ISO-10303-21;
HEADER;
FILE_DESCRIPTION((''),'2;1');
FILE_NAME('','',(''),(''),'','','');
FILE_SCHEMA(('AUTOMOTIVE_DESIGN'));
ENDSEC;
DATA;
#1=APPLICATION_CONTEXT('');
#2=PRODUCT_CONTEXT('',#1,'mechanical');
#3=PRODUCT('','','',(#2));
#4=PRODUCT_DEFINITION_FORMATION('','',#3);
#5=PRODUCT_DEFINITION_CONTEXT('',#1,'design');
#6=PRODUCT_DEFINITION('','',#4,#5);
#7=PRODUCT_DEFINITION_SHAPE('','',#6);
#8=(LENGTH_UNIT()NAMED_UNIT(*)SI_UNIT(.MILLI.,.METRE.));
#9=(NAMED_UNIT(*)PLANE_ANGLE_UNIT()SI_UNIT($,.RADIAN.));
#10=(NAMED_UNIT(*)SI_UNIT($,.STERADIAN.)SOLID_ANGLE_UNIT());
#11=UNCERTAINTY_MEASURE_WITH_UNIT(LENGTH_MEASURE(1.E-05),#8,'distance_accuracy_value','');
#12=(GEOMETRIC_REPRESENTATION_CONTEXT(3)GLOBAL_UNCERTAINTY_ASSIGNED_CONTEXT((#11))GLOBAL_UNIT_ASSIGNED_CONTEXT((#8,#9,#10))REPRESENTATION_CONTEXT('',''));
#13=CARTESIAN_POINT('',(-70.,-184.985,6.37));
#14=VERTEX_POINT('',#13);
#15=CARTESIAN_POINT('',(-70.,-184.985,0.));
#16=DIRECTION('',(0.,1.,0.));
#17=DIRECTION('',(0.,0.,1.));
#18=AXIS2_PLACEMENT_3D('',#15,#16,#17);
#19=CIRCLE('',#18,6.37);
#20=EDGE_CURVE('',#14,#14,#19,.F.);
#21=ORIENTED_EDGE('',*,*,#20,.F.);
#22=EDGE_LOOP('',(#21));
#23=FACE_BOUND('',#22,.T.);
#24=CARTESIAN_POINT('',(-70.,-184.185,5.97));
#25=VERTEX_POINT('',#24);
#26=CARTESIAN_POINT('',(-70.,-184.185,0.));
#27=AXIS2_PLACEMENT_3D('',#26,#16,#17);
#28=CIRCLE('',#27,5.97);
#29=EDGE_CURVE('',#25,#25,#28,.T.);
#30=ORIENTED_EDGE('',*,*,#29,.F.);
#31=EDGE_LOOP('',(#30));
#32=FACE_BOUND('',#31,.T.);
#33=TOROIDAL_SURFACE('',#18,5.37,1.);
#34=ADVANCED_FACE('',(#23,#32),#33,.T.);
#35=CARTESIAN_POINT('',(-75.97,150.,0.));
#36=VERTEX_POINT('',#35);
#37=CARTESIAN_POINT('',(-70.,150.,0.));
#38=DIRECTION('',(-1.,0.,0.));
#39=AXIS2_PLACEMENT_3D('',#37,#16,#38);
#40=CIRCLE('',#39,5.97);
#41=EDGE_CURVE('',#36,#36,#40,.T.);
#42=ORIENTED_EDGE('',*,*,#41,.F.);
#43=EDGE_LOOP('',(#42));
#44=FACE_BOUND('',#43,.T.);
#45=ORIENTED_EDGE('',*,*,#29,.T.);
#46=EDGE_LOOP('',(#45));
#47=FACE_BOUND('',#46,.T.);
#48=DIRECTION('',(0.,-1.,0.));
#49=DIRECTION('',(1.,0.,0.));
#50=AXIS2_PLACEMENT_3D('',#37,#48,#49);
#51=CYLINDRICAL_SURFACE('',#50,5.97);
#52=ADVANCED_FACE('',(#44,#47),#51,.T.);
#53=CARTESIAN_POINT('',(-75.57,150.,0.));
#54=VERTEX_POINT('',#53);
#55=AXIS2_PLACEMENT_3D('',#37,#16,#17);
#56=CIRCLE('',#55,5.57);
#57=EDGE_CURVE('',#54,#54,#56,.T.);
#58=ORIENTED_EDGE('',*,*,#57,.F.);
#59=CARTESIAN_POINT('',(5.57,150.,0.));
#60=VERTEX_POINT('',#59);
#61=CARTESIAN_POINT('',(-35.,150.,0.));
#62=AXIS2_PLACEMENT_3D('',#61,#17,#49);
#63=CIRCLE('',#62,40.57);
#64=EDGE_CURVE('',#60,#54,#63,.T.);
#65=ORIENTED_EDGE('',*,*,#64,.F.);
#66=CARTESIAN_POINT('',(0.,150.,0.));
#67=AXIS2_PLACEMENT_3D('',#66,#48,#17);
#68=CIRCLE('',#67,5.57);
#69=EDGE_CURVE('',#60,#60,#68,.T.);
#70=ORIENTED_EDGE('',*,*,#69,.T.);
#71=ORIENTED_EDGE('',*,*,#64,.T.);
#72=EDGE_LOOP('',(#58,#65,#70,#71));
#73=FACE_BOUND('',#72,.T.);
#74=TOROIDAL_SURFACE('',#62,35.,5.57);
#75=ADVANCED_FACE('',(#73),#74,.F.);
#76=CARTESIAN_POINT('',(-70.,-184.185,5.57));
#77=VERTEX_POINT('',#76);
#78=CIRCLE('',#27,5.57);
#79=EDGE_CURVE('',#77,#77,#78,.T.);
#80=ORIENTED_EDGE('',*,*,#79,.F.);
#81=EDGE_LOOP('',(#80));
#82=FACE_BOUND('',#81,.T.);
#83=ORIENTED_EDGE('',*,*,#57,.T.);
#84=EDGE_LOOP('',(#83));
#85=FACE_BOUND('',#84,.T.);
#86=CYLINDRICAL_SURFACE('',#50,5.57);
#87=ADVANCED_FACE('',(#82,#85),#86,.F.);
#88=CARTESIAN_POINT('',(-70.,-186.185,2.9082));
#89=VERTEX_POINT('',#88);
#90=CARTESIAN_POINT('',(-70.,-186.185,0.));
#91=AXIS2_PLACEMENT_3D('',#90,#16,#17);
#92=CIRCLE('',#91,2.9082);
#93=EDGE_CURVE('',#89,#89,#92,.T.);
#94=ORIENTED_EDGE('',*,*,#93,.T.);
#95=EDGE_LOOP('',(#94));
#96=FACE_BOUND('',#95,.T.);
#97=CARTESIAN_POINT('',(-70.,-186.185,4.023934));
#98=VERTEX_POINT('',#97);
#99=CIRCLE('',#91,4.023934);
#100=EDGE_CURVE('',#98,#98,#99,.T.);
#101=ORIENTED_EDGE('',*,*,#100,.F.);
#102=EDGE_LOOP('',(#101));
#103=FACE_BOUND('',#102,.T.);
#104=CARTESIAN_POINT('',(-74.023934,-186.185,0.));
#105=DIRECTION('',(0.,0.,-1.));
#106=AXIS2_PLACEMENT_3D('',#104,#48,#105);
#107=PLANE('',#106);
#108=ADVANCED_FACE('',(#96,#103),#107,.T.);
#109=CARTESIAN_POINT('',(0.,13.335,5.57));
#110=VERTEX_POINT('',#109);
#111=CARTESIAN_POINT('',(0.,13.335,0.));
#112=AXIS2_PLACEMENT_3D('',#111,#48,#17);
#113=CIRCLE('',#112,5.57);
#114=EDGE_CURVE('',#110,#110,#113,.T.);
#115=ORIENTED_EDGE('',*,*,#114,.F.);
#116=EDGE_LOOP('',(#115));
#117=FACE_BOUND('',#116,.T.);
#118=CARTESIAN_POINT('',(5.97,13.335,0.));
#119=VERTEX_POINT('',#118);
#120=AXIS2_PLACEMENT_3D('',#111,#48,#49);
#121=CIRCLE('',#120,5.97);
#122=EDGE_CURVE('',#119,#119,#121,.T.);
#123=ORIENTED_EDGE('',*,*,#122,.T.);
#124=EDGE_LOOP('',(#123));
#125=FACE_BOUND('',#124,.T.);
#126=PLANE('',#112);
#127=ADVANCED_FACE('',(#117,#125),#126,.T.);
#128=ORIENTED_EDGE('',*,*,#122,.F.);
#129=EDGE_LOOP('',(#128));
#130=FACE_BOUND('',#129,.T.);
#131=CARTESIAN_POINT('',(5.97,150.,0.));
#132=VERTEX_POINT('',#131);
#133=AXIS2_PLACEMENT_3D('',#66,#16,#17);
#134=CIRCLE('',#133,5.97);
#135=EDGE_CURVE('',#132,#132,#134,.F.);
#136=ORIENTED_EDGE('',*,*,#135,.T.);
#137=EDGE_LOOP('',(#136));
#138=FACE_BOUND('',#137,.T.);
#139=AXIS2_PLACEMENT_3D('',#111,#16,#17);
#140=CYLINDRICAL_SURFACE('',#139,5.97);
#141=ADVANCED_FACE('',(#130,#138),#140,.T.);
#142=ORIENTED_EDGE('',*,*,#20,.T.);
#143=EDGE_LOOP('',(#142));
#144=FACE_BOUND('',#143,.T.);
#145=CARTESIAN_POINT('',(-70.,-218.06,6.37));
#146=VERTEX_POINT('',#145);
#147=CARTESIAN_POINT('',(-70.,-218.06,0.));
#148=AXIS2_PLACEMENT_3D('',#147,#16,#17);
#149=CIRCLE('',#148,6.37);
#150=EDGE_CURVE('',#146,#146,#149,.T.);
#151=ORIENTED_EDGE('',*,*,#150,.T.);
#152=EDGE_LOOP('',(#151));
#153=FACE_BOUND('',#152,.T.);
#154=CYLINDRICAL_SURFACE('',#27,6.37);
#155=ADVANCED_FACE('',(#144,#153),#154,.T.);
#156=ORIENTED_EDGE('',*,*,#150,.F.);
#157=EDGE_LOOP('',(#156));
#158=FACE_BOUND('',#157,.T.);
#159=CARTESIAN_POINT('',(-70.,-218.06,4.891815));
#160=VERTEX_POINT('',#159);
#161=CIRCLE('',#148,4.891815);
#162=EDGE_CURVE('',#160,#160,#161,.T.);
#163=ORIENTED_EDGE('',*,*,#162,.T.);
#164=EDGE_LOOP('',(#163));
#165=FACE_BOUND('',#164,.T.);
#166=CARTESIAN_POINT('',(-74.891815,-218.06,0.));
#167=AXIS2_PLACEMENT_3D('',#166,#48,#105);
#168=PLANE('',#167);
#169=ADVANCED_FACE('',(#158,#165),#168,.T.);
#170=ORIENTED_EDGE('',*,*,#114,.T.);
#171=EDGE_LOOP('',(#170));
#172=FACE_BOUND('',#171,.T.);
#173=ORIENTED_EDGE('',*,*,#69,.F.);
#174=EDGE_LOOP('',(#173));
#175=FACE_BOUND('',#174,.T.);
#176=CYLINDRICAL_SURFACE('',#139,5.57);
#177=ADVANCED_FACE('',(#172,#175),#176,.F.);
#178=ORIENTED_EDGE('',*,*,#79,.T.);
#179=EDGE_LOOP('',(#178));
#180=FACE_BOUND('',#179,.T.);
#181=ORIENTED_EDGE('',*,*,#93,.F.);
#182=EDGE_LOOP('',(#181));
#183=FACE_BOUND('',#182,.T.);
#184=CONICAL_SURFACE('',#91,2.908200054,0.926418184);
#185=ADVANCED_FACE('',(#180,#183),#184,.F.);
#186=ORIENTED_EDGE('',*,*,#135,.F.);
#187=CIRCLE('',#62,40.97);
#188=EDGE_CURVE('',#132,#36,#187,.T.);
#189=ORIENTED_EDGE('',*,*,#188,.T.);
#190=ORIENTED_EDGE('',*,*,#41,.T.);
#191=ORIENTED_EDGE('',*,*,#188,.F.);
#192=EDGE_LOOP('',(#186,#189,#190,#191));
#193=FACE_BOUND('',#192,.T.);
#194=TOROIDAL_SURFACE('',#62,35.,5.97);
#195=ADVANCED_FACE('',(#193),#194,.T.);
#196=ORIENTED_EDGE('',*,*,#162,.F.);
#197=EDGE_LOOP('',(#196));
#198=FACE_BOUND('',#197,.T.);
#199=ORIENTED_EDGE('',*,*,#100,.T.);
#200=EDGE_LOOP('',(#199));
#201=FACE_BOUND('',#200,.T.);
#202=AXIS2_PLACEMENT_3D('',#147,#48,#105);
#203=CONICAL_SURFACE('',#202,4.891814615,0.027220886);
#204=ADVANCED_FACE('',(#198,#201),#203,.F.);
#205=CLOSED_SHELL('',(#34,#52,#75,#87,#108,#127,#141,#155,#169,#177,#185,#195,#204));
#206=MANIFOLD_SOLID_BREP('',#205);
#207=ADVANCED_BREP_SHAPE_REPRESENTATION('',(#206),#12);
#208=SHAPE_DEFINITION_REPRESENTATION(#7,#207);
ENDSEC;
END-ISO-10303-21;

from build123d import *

# Parameters (mm, degrees)
SWEEP_THIN1_PROFILE_R   = 5.97
SWEEP_THIN1_PROFILE_R_2 = 5.57
FILLET1_R               = 1


with BuildPart() as part:
    # Sweep-Thin1: sweep along a path in Sketch1
    with BuildLine(Plane(origin=(0, 0, 0), x_dir=(0, 1, 0), z_dir=(0, 0, 1))) as sweep_thin1_path:
        Line((13.335, 0), (150, 0))
        ThreePointArc((150, 0), (185, 35), (150, 70))
        Line((150, 70), (-184.185, 70))
    # Sweep-Thin1 profile (on start of the path) → Sweep-Thin1 (sweep)
    with BuildSketch(Plane.ZX.offset(13.335)):
        Circle(SWEEP_THIN1_PROFILE_R)
        Circle(SWEEP_THIN1_PROFILE_R_2, mode=Mode.SUBTRACT)
    sweep(path=sweep_thin1_path.line)

    # Sketch19 → Revolve2 (revolve)
    with BuildSketch(Plane(origin=(0, 0, 0), x_dir=(0, 1, 0), z_dir=(0, 0, 1)), mode=Mode.PRIVATE) as revolve2_sk:
        Polygon((-184.185, 76.37), (-218.06, 76.37), (-218.06, 74.891814615), (-186.185, 74.023934498), (-186.185, 72.908200054), (-184.185, 75.57), align=None)
    revolve(revolve2_sk.sketch.rotate(Axis((-70, -184.185, 0), (0, -1, 0)), 270), axis=Axis((-70, -184.185, 0), (0, -1, 0)))

    # Fillet1
    # the kernel refuses this fillet: 1 mm, written as the material it takes off along each edge
    with BuildSketch(Plane(origin=(-70, -184.185, 0), x_dir=(0, 0, 1), z_dir=(1, 0, 0))) as fillet1_piece_1:
        with BuildLine():
            CenterArc((5.37, 0.8), FILLET1_R, 306.869897646, 53.130102354)
            Line((6.37, 0.8), (6.39, 0.8))
            Line((6.39, 0.8), (6.39, 0))
            Line((6.39, 0), (6.37, -0.02))
            ThreePointArc((6.37, -0.02), (6.17, -0.02), (5.982, -0.016))
            Line((5.982, -0.016), (5.97, 0))
        make_face()
    revolve(axis=Axis((-70, -184.185, 0), (0, -1, 0)), mode=Mode.SUBTRACT)


solid = part.part
